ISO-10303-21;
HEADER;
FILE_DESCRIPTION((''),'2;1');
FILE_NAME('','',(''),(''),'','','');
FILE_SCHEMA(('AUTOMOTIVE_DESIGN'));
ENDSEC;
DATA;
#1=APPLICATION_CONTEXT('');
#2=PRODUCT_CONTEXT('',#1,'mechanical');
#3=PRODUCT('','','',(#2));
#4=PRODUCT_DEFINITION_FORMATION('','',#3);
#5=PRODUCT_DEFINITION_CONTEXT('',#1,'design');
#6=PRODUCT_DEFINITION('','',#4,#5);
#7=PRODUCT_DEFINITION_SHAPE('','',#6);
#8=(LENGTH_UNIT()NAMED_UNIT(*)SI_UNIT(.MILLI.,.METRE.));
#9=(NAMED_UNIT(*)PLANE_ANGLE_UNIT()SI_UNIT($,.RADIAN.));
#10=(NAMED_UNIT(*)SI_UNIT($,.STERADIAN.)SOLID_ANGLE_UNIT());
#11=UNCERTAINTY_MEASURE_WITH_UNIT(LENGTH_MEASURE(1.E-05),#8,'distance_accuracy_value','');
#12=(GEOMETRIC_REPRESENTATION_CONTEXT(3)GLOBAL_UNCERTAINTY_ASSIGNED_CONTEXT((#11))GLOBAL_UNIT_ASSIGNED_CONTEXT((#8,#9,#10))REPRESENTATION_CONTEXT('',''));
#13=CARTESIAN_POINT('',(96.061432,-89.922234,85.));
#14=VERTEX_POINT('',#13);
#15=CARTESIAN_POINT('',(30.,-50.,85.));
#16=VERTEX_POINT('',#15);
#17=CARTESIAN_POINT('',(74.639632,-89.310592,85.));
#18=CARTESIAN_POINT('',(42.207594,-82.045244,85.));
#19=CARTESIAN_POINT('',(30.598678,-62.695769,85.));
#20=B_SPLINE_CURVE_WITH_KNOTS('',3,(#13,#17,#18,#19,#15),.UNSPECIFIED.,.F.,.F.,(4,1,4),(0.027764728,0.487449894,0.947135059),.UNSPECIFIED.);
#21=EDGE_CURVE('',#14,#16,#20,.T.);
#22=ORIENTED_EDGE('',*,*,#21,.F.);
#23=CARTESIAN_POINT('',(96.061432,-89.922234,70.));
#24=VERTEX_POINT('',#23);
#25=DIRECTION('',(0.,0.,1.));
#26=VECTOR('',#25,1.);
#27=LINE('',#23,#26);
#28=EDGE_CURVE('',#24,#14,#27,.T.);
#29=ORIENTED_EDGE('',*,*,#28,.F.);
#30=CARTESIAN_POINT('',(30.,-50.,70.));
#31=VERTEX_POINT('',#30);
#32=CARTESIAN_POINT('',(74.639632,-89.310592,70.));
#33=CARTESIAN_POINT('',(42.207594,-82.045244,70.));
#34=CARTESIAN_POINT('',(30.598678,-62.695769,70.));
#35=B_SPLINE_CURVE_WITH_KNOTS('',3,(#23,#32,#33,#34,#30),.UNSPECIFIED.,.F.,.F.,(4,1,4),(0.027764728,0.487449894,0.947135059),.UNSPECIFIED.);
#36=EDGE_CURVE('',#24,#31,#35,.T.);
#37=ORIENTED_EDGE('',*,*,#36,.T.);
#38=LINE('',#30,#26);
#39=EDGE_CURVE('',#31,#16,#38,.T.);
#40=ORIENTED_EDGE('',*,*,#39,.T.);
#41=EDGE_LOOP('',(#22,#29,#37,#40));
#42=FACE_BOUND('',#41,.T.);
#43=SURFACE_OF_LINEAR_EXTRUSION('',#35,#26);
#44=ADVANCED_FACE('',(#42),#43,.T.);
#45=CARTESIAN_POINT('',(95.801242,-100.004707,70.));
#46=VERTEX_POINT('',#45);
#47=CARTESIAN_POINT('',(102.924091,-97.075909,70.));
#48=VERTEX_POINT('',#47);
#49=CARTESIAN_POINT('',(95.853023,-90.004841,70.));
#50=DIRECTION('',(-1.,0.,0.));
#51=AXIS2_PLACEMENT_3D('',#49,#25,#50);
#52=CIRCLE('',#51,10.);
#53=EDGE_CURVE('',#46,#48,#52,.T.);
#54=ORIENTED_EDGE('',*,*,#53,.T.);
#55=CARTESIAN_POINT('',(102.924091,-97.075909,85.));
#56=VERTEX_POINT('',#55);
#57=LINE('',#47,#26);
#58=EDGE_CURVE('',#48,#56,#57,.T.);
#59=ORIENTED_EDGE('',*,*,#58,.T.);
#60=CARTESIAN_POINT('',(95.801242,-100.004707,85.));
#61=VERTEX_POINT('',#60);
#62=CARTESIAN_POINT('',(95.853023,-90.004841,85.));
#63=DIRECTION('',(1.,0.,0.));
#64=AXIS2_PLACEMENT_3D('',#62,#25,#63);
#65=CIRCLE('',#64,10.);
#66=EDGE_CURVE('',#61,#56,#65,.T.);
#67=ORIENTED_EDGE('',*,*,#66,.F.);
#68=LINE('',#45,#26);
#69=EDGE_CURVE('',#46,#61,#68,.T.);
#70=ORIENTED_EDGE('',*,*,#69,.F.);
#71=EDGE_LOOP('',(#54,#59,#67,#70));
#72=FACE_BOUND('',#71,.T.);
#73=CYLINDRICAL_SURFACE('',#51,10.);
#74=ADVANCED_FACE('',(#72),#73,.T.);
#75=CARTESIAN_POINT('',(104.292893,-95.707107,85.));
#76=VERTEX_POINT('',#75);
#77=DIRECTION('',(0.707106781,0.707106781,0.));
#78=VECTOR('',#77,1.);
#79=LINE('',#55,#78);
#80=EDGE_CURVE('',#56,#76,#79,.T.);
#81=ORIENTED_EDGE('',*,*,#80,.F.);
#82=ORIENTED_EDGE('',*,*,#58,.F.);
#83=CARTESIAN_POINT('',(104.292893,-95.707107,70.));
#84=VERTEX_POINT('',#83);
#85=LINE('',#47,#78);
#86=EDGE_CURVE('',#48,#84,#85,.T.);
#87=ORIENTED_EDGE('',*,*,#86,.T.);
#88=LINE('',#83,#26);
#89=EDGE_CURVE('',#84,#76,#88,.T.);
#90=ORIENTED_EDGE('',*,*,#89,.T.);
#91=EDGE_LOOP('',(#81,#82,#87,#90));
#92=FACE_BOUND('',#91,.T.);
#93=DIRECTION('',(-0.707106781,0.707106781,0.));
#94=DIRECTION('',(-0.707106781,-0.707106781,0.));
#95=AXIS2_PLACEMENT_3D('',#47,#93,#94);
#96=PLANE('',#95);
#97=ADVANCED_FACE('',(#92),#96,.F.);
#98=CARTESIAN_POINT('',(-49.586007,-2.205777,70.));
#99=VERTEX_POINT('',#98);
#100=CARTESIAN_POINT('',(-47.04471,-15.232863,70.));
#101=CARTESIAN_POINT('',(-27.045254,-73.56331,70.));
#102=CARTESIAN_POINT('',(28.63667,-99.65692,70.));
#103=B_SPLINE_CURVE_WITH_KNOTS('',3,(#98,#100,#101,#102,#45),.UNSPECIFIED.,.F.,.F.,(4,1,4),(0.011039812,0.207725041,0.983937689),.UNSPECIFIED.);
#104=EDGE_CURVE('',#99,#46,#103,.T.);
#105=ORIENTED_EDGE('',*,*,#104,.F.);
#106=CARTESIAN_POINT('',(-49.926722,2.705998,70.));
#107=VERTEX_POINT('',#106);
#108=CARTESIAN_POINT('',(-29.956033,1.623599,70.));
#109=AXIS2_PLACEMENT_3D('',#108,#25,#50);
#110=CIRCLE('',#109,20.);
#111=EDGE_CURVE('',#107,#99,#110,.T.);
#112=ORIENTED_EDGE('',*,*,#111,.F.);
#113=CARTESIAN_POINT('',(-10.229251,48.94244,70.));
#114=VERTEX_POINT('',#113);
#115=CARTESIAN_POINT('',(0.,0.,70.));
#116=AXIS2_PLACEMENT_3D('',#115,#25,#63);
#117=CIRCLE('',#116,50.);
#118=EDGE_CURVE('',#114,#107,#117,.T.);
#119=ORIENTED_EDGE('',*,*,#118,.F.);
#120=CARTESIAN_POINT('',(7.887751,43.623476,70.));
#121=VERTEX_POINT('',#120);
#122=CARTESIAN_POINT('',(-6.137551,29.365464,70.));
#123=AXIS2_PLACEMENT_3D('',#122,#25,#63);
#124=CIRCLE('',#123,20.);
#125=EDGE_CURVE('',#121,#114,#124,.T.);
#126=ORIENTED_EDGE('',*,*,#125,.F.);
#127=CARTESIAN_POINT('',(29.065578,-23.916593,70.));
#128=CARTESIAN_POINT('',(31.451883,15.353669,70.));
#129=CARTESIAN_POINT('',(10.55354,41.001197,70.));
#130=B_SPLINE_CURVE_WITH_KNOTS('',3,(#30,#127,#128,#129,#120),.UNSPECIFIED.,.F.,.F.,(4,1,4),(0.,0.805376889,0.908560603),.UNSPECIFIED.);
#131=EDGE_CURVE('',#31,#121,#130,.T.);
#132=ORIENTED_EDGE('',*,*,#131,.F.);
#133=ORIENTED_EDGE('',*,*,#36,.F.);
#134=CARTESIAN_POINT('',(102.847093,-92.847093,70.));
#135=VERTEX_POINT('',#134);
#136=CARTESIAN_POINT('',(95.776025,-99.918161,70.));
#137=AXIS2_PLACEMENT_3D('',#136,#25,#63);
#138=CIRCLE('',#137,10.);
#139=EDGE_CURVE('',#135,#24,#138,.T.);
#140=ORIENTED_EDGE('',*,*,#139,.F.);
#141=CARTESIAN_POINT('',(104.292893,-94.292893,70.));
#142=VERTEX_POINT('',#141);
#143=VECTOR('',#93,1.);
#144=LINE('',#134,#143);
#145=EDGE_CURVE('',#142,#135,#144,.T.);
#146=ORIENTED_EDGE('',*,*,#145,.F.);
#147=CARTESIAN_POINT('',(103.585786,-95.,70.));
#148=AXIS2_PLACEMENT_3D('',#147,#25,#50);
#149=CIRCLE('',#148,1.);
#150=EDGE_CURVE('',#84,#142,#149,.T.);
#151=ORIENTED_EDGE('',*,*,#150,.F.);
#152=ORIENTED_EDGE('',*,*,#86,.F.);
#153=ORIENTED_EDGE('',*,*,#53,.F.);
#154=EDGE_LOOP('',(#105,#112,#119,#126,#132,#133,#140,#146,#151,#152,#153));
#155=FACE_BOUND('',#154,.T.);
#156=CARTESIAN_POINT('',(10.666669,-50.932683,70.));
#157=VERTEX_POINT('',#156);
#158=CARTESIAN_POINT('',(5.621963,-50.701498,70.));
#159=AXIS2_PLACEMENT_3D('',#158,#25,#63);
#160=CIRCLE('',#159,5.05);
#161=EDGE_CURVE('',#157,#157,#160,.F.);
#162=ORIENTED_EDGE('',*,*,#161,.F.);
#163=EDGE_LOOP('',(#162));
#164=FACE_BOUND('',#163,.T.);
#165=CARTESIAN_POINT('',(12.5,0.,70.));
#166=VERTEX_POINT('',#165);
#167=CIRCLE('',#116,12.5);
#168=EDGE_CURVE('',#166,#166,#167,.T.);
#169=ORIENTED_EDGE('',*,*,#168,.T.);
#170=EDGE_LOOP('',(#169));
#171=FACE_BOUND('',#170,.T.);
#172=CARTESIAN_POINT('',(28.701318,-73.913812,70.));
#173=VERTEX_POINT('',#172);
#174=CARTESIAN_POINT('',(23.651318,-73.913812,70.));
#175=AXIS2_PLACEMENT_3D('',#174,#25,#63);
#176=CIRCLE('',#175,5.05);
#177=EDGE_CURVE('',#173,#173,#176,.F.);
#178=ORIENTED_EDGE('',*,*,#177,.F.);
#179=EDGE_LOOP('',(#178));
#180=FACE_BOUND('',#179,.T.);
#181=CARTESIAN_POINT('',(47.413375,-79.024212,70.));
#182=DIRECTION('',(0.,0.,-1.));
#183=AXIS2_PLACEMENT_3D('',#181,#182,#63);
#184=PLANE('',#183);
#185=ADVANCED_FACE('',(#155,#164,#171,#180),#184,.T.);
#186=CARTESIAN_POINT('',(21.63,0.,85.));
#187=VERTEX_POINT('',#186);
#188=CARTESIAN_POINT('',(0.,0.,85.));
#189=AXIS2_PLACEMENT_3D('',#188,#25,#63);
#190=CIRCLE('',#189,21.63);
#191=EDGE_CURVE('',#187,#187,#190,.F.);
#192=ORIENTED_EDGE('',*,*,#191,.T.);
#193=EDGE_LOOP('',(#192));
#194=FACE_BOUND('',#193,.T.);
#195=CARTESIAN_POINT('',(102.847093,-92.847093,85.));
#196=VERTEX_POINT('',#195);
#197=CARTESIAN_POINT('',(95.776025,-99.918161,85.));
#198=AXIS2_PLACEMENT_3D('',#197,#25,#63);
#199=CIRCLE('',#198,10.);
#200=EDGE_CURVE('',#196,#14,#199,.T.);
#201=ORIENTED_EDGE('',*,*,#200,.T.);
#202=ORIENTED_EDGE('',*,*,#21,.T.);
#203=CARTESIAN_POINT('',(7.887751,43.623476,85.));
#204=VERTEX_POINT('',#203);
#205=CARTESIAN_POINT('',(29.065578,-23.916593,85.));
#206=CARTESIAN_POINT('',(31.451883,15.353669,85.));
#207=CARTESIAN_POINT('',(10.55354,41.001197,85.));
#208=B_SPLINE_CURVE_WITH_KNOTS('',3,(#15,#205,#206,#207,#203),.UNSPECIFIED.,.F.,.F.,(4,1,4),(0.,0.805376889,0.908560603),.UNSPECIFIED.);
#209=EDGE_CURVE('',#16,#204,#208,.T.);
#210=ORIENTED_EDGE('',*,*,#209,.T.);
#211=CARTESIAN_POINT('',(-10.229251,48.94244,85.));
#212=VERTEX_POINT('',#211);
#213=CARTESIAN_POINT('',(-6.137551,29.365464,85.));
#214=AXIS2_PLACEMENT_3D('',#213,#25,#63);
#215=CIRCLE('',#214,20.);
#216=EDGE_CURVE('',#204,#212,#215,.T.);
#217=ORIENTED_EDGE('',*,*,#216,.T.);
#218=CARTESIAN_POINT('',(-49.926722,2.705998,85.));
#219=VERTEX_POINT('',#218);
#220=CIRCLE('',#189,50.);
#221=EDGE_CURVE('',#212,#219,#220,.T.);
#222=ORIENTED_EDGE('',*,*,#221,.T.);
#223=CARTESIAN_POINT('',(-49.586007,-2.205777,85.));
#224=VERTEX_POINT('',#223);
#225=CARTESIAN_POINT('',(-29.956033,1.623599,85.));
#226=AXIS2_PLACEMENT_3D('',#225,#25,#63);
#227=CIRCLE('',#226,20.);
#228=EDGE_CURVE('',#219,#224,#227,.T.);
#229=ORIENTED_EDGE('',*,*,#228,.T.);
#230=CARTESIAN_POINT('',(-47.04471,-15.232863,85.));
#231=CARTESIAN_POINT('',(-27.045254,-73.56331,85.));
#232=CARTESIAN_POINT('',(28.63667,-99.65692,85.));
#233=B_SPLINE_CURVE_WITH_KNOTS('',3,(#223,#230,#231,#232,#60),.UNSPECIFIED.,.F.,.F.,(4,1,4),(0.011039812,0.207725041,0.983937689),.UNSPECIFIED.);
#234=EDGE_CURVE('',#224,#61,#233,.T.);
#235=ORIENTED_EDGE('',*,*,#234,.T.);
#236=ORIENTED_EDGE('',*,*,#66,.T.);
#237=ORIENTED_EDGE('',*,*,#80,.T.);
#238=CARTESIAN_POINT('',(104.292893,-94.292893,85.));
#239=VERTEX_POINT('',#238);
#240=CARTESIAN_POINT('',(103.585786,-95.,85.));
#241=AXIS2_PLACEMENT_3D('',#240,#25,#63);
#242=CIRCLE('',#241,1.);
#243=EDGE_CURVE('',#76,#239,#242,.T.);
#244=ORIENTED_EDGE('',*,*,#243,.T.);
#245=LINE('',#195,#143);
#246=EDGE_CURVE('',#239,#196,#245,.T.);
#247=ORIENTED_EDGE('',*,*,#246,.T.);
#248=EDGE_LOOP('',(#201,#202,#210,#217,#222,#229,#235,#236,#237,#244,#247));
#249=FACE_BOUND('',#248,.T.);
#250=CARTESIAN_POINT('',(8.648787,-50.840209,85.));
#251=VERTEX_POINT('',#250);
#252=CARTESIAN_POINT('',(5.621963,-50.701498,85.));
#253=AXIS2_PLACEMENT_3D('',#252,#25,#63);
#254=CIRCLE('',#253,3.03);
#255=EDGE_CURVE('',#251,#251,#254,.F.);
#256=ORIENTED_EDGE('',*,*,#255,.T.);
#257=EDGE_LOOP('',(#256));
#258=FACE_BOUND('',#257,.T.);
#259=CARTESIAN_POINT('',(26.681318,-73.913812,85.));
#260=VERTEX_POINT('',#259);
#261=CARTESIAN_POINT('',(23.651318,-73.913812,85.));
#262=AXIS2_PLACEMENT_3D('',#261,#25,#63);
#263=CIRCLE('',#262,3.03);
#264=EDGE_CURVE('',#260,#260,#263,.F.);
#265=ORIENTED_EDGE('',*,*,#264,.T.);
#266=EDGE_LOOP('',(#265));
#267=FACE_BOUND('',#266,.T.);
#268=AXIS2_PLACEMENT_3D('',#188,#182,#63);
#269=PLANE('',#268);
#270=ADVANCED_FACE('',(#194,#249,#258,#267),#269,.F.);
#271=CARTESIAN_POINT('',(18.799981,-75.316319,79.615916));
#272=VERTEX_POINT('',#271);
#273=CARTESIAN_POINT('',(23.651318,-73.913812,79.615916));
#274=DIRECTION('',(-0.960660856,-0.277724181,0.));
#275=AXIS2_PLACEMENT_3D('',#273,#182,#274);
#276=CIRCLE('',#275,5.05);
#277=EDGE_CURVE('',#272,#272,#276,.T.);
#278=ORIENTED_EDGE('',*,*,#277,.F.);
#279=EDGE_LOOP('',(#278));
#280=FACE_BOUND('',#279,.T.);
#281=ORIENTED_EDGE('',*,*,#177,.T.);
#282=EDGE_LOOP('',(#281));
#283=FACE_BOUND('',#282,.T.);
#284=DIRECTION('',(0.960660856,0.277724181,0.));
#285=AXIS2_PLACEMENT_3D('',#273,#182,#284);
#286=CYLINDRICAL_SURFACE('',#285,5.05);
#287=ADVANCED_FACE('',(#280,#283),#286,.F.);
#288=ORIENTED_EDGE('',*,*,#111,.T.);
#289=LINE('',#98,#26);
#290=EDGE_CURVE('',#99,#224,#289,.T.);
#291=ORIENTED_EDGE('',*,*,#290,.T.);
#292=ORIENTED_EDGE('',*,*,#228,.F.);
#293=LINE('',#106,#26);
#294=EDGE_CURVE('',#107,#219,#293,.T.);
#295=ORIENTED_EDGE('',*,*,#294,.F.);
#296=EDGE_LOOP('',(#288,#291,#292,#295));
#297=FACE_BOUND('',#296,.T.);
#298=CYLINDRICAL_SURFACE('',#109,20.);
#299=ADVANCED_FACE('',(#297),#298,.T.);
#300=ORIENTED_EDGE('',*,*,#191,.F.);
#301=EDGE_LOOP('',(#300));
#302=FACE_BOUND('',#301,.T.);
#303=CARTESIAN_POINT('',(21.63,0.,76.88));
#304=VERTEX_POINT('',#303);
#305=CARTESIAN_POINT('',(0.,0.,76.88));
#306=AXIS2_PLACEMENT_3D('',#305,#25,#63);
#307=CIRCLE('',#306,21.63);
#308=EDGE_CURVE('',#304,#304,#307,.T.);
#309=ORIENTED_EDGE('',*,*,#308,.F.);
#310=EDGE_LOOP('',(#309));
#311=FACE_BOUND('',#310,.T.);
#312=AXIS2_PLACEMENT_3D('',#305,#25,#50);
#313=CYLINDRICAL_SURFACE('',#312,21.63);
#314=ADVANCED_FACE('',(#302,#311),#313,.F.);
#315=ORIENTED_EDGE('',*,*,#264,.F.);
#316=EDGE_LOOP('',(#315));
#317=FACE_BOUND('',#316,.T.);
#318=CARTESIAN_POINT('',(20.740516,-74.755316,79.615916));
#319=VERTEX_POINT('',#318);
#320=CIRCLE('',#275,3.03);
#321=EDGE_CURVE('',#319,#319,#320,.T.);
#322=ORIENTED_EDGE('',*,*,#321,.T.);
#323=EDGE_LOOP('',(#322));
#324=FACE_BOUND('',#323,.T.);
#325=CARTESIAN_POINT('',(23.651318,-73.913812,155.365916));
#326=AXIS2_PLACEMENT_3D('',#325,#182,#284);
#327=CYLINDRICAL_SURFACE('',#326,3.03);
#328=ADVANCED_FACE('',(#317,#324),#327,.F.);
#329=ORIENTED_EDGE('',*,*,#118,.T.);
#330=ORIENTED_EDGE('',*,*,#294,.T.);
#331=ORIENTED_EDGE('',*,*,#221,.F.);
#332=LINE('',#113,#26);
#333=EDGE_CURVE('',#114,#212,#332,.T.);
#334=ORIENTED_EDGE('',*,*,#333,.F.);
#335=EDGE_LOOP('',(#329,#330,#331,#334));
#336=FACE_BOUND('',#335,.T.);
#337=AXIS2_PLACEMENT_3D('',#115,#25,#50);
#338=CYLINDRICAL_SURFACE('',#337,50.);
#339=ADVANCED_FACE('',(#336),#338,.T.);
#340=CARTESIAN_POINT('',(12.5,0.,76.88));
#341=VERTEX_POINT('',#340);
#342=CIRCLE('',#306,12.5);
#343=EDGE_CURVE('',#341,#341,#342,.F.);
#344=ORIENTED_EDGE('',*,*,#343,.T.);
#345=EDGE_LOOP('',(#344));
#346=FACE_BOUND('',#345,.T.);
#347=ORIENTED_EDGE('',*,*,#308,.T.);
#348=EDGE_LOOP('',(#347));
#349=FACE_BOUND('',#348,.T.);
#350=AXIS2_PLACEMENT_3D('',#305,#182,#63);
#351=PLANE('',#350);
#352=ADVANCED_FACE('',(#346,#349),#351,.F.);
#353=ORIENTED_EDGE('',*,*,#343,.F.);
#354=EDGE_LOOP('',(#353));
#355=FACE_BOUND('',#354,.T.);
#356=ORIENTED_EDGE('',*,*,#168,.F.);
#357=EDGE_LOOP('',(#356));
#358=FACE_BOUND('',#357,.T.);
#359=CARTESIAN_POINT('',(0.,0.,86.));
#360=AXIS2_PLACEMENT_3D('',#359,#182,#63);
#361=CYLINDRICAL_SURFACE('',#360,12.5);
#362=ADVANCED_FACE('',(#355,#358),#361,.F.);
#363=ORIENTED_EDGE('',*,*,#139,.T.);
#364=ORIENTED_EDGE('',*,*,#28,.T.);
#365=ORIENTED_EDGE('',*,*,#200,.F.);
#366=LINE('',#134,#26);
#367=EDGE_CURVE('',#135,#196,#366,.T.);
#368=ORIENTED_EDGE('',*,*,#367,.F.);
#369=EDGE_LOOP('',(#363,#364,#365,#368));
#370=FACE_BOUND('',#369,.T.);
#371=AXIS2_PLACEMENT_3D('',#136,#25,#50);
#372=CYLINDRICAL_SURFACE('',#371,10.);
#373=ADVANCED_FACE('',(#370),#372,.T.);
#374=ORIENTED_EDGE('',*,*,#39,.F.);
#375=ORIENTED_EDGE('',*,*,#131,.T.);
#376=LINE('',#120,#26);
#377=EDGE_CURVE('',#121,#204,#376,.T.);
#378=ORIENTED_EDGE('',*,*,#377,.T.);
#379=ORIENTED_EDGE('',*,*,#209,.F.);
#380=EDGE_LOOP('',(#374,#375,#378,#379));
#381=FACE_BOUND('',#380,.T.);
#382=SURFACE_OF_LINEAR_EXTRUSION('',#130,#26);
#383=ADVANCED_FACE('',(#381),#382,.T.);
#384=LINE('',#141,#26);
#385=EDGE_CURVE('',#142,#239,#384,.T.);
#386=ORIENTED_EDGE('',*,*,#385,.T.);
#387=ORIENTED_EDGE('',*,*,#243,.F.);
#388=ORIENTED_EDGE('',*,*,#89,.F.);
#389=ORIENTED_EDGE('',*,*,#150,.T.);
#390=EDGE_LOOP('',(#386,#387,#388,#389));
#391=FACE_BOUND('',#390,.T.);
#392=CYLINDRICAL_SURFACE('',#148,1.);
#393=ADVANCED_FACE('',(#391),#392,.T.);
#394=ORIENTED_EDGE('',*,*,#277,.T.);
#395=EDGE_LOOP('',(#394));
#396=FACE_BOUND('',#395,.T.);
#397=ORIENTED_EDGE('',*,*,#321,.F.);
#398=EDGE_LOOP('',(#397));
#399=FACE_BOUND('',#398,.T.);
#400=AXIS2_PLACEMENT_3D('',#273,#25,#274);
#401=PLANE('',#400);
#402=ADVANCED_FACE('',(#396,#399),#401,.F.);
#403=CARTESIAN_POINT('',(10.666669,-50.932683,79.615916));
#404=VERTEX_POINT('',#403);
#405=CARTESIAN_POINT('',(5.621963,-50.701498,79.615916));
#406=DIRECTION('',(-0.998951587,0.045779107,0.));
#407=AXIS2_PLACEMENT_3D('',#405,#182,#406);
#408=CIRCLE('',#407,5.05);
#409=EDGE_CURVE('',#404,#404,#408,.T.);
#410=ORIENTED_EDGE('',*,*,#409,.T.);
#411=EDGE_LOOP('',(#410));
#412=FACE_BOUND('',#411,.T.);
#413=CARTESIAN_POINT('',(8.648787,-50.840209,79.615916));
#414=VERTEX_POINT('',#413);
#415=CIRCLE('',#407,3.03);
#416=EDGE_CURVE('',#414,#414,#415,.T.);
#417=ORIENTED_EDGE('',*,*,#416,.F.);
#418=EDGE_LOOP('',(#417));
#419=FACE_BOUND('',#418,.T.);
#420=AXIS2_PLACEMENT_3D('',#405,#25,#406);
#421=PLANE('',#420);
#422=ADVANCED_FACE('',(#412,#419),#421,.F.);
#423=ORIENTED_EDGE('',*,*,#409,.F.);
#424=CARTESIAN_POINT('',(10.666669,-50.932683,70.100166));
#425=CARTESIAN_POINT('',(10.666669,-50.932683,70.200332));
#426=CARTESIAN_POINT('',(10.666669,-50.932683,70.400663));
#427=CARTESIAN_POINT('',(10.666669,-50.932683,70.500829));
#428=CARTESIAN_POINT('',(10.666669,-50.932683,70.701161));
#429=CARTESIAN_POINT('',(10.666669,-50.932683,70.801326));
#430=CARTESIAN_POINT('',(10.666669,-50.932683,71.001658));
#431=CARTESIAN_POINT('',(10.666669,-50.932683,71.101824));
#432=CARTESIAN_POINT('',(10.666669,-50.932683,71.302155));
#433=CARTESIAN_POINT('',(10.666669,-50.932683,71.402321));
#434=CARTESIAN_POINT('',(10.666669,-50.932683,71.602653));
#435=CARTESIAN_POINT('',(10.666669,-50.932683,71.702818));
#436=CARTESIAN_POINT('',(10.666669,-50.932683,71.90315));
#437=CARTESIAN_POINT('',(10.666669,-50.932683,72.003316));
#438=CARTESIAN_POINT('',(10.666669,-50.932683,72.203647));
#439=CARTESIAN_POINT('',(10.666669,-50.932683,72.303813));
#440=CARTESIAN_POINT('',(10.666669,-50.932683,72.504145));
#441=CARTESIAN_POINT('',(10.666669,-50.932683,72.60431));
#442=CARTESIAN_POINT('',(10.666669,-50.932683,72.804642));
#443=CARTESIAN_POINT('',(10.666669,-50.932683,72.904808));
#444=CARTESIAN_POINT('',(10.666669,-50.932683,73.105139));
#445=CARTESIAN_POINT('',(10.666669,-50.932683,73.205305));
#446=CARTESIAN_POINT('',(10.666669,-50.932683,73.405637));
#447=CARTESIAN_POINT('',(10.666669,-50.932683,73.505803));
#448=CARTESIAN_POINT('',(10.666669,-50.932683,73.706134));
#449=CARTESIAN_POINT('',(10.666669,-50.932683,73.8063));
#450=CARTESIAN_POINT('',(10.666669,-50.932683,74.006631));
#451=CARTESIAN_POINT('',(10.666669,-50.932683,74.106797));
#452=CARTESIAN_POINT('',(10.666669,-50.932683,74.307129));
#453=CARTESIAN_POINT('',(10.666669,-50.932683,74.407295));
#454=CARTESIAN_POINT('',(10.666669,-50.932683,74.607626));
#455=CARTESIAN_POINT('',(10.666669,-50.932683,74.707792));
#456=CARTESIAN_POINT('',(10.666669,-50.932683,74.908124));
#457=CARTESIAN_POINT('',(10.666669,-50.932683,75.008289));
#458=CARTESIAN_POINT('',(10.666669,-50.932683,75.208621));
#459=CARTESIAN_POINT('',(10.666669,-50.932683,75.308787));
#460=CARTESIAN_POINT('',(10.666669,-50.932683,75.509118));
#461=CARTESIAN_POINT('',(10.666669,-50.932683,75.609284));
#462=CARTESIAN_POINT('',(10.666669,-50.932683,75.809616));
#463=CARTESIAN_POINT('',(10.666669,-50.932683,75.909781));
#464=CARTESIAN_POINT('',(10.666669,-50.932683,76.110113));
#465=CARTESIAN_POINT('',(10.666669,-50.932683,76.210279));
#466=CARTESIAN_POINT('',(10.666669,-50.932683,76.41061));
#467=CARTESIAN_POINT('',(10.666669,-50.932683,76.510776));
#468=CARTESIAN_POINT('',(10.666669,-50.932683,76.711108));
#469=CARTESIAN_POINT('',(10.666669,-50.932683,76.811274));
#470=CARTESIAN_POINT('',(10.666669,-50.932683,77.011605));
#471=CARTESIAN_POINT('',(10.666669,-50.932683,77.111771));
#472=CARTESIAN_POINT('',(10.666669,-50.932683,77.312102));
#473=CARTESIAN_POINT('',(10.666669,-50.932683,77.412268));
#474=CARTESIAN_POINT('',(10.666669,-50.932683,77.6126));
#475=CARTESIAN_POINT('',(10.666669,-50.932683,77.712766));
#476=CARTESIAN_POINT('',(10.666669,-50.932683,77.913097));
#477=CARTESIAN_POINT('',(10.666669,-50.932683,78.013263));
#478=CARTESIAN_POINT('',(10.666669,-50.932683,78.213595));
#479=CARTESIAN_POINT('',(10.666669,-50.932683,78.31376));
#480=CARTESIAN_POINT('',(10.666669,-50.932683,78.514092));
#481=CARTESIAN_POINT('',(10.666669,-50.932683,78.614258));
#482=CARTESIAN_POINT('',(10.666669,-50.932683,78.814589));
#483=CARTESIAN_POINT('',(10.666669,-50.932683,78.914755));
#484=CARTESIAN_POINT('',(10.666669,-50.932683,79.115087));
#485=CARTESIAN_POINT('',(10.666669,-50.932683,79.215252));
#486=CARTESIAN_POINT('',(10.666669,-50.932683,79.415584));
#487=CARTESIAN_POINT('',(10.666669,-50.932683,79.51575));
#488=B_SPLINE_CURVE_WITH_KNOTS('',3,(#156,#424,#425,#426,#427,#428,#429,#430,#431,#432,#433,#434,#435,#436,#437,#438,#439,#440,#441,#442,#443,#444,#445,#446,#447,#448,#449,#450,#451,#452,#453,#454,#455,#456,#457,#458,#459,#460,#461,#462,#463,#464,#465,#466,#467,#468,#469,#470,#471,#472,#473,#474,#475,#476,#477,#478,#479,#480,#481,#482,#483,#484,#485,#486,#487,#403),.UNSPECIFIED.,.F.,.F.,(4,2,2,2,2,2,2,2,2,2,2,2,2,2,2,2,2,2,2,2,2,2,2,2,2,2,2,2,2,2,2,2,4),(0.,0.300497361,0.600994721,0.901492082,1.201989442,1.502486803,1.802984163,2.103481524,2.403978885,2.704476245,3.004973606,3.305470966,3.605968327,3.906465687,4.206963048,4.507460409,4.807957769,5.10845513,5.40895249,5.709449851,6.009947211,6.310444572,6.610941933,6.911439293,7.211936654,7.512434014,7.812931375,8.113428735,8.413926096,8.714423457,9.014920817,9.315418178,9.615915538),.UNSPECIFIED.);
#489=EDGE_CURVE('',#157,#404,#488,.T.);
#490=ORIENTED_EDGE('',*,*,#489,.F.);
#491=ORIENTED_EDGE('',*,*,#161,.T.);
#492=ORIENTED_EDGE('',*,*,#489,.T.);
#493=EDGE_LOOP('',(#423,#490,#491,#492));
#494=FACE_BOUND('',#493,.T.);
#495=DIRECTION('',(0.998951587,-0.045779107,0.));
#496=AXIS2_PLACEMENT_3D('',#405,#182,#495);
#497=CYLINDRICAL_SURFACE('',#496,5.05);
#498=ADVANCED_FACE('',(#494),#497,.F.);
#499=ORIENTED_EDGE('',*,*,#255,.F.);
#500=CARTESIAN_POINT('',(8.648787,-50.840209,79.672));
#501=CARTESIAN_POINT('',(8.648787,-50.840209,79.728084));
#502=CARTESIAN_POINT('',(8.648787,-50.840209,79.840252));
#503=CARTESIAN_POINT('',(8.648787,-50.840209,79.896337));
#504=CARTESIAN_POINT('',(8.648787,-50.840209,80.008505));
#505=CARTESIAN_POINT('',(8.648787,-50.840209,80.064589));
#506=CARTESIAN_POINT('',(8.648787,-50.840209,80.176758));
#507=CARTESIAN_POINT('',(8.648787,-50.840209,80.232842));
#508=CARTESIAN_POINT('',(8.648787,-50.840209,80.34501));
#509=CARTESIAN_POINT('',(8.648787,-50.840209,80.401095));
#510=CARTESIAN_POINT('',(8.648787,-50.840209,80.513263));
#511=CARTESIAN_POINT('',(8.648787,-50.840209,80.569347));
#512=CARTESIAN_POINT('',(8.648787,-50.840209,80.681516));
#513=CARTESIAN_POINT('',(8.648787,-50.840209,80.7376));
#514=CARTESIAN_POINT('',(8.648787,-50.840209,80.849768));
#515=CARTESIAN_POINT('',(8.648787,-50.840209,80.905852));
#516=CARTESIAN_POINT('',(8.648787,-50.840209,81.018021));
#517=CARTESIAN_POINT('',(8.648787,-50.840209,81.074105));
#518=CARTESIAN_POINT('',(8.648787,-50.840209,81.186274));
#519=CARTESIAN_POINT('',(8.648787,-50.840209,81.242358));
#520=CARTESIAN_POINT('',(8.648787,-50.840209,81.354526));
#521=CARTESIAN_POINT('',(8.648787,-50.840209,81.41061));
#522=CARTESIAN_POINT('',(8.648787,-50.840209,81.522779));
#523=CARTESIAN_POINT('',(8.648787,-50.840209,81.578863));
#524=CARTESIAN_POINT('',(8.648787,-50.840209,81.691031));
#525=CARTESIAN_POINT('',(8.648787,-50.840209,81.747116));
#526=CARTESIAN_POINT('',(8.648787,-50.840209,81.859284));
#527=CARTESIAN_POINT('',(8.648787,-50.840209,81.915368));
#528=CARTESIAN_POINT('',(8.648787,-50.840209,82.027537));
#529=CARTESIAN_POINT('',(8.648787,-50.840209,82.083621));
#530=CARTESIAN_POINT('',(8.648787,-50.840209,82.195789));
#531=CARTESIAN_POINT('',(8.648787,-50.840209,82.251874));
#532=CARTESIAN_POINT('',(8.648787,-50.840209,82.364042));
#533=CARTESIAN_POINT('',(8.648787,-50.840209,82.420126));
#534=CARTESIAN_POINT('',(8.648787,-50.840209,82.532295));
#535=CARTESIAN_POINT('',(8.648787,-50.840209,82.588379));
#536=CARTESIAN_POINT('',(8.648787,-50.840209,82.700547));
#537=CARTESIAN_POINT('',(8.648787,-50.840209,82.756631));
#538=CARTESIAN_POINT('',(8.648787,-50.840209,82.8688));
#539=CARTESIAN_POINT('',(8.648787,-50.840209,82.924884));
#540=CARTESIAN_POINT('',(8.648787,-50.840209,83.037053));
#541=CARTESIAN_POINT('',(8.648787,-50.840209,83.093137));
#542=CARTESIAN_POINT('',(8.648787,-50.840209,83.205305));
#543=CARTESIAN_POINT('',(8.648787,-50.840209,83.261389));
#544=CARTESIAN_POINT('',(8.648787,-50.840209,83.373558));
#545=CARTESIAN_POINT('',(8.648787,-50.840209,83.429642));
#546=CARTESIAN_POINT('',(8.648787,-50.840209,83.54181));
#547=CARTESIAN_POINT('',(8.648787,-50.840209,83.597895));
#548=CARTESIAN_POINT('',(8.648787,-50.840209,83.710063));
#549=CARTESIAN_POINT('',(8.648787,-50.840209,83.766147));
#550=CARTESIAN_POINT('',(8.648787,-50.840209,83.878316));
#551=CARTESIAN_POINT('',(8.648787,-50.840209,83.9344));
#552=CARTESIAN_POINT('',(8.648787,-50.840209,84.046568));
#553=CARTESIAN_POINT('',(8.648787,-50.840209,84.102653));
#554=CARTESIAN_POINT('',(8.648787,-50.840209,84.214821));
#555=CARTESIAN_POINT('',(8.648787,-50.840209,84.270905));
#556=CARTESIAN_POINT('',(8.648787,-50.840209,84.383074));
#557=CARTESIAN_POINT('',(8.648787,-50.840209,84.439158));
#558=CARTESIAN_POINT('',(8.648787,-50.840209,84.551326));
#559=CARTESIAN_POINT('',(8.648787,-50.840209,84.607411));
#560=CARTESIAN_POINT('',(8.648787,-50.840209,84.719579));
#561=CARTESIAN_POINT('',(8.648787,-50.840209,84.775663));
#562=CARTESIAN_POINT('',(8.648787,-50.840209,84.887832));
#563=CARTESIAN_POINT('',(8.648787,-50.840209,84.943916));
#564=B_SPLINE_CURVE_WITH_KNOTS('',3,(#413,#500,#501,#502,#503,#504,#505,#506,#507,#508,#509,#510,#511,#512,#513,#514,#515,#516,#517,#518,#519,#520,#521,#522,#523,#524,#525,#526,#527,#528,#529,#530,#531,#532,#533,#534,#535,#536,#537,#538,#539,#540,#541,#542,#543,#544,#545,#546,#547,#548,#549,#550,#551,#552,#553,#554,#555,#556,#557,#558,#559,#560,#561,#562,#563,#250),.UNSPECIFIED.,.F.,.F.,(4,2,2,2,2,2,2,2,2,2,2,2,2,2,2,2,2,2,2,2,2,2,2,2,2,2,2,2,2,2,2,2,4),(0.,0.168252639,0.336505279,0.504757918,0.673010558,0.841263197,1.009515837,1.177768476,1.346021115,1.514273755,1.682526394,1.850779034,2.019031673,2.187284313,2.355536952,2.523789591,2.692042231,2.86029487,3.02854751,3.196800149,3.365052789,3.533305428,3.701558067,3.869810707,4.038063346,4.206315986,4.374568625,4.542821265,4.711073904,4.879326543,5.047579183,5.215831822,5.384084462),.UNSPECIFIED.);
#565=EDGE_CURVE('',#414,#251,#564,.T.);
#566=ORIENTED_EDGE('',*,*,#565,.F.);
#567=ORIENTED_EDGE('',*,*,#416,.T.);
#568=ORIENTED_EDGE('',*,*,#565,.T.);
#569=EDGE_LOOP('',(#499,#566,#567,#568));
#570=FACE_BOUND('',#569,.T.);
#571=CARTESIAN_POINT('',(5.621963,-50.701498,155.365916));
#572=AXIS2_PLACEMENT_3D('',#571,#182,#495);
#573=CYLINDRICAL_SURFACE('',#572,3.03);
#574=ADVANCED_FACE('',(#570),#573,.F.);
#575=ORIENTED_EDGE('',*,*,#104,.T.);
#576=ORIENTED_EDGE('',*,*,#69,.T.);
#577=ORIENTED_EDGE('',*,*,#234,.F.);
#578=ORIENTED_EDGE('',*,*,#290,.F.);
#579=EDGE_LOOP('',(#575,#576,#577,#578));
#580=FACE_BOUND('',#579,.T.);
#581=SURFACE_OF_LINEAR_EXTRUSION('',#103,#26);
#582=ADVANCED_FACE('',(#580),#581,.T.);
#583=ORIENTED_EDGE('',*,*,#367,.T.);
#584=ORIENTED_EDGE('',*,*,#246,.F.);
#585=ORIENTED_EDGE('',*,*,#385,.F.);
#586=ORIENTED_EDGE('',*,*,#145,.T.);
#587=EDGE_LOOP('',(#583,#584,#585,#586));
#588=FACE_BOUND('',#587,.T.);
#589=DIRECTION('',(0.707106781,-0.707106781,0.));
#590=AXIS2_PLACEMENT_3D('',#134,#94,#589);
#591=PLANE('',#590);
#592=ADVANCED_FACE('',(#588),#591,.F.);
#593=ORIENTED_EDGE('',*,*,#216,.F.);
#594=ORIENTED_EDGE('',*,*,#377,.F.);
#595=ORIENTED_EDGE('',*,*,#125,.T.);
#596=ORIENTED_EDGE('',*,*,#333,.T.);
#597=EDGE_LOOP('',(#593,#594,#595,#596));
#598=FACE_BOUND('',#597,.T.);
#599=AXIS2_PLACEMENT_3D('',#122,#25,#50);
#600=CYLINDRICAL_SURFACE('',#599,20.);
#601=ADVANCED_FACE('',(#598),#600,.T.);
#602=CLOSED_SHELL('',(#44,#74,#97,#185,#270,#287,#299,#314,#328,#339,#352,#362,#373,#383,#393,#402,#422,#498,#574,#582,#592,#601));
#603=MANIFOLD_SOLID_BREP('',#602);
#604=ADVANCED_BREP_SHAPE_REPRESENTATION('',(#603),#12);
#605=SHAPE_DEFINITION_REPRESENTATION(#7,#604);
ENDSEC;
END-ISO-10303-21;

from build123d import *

# Parameters (mm, degrees)
CROQUIS1_R              = 10
SALIENTE_EXTRUIR1_DEPTH = 100
CORTAR_EXTRUIR4_DEPTH   = 15
CROQUIS3_W              = 244.799963401
CROQUIS3_H              = 159.784694376
CORTAR_EXTRUIR5_DEPTH   = 35
CROQUIS4_W              = 177.681228393
CROQUIS4_H              = 202.290816813
CORTAR_EXTRUIR6_DEPTH   = 50
CAVIDAD1_START          = 90.384084462
CAVIDAD1_OUTLINE_R      = 5.05
CAVIDAD1_DEPTH          = 9.615915538
CAVIDAD1_START_2        = 85
CAVIDAD1_2_OUTLINE_R    = 3.03
CAVIDAD1_2_DEPTH        = 5.384084462
CROQUIS5_R              = 21
CORTAR_EXTRUIR7_DEPTH   = 8
CROQUIS6_R              = 12.5
CORTAR_EXTRUIR8_DEPTH   = 8
SALIENTE_EXTRUIR2_START = 8
CROQUIS7_R              = 21
CROQUIS7_R_2            = 12.5
SALIENTE_EXTRUIR2_DEPTH = 8
CROQUIS8_R              = 21
CORTAR_EXTRUIR9_DEPTH   = 8
CAVIDAD2_START          = 85
CAVIDAD2_OUTLINE_R      = 21.63
CAVIDAD2_DEPTH          = 8.12


# Read off the part's stored shape, not the designer's step: Cavidad1, Cavidad2
with BuildPart() as part:
    # Croquis1 → Saliente-Extruir1 (new body)
    with BuildSketch(Plane.XY):
        with BuildLine():
            Line((102.84709295, -92.84709295), (104.292893219, -94.292893219))
            ThreePointArc((104.292893219, -94.292893219), (104.585786438, -95), (104.292893219, -95.707106781))
            Line((104.292893219, -95.707106781), (102.924090823, -97.075909177))
            ThreePointArc((102.924090823, -97.075909177), (99.655924863, -99.253513567), (95.801242309, -100.004707302))
            add(Edge.make_bspline(
                [(-49.58600728, -2.205776949), (-47.044709507, -15.23286343), (-27.045253615, -73.563310407), (28.636670051, -99.656919769), (95.801242309, -100.004707302)],
                knots=[0.011039812, 0.011039812, 0.011039812, 0.011039812, 0.207725041, 0.983937689, 0.983937689, 0.983937689, 0.983937689], degree=3))
            ThreePointArc((-49.58600728, -2.205776949), (-49.90808847, 0.239585929), (-49.92672205, 2.705998037))
            ThreePointArc((-49.92672205, 2.705998037), (-37.935964584, 32.570885635), (-10.229250857, 48.942439936))
            ThreePointArc((-10.229250857, 48.942439936), (-0.503550938, 48.555514737), (7.88775097, 43.623476385))
            add(Edge.make_bspline(
                [(30, -50), (29.065577858, -23.91659264), (31.451883129, 15.353668912), (10.5535399, 41.001196903), (7.88775097, 43.623476385)],
                knots=[0, 0, 0, 0, 0.805376889, 0.908560603, 0.908560603, 0.908560603, 0.908560603], degree=3))
            add(Edge.make_bspline(
                [(96.061432126, -89.922234449), (74.639632489, -89.310592156), (42.207594165, -82.045244121), (30.598677739, -62.69576919), (30, -50)],
                knots=[0.027764728, 0.027764728, 0.027764728, 0.027764728, 0.487449894, 0.947135059, 0.947135059, 0.947135059, 0.947135059], degree=3))
            ThreePointArc((96.061432126, -89.922234449), (99.734323975, -90.734922209), (102.84709295, -92.84709295))
        make_face()
        Circle(CROQUIS1_R, mode=Mode.SUBTRACT)
    extrude(amount=SALIENTE_EXTRUIR1_DEPTH)

    # Croquis2 → Cortar-Extruir4 (cut)
    with BuildSketch(Plane(origin=(0, 0, 0), x_dir=(-1, 0, 0), z_dir=(0, 0, -1))):
        with BuildLine():
            ThreePointArc((1.102623365, 39.984799883), (1.653330869, 39.965816607), (2.203724614, 39.939248839))
            ThreePointArc((2.203724614, 39.939248839), (3.208029629, 37.678468026), (3.853201686, 35.290265468))
            ThreePointArc((3.853201686, 35.290265468), (4.391380959, 35.227344113), (4.928537187, 35.156215968))
            ThreePointArc((4.928537187, 35.156215968), (6.140272041, 37.312939662), (7.668866774, 39.257973488))
            ThreePointArc((7.668866774, 39.257973488), (8.208938801, 39.148605643), (8.747452981, 39.031808392))
            ThreePointArc((8.747452981, 39.031808392), (9.365948293, 36.63655851), (9.609235823, 34.174736091))
            ThreePointArc((9.609235823, 34.174736091), (10.129718517, 34.024091505), (10.647841327, 33.865520446))
            ThreePointArc((10.647841327, 33.865520446), (12.198034749, 35.793384238), (14.025923488, 37.460291914))
            ThreePointArc((14.025923488, 37.460291914), (14.540628281, 37.263522769), (15.052573634, 37.05968196))
            ThreePointArc((15.052573634, 37.05968196), (15.268388303, 34.595299183), (15.103155055, 32.127009001))
            ThreePointArc((15.103155055, 32.127009001), (15.591743761, 31.892750375), (16.076700112, 31.651061807))
            ThreePointArc((16.076700112, 31.651061807), (17.923066867, 33.297478598), (20.000389573, 34.640791229))
            ThreePointArc((20.000389573, 34.640791229), (20.475687326, 34.361988134), (20.947099317, 34.076664012))
            ThreePointArc((20.947099317, 34.076664012), (20.754346482, 31.610370276), (20.18509959, 29.202940855))
            ThreePointArc((20.18509959, 29.202940855), (20.628466879, 28.891458153), (21.067028427, 28.57324471))
            ThreePointArc((21.067028427, 28.57324471), (23.159204443, 29.893304542), (25.429297167, 30.87638006))
            ThreePointArc((25.429297167, 30.87638006), (25.852222997, 30.523148037), (26.270242736, 30.164123501))
            ThreePointArc((26.270242736, 30.164123501), (25.674180192, 27.763192871), (24.716447225, 25.482292608))
            ThreePointArc((24.716447225, 25.482292608), (25.102499195, 25.102082267), (25.482703124, 24.716023982))
            ThreePointArc((25.482703124, 24.716023982), (27.763619294, 25.673719065), (30.164559823, 26.269741732))
            ThreePointArc((30.164559823, 26.269741732), (30.523577417, 25.85171603), (30.876802415, 25.428784332))
            ThreePointArc((30.876802415, 25.428784332), (29.893689193, 23.158707937), (28.573594612, 21.066553846))
            ThreePointArc((28.573594612, 21.066553846), (28.891800771, 20.627987013), (29.203276108, 20.18461455))
            ThreePointArc((29.203276108, 20.18461455), (31.610714984, 20.753821458), (34.077011921, 20.94653333))
            ThreePointArc((34.077011921, 20.94653333), (34.362328213, 20.4751166), (34.641123413, 19.999814215))
            ThreePointArc((34.641123413, 19.999814215), (33.297776281, 17.922513822), (31.651328823, 16.076174412))
            ThreePointArc((31.651328823, 16.076174412), (31.893009337, 15.591214047), (32.127259848, 15.102621451))
            ThreePointArc((32.127259848, 15.102621451), (34.595552773, 15.267813702), (37.059931966, 15.051958102))
            ThreePointArc((37.059931966, 15.051958102), (37.263764272, 14.540009363), (37.460524868, 14.025301302))
            ThreePointArc((37.460524868, 14.025301302), (35.793586832, 12.197440249), (33.865697293, 10.647278847))
            ThreePointArc((33.865697293, 10.647278847), (34.024259747, 10.129153404), (34.174895688, 9.608668207))
            ThreePointArc((34.174895688, 9.608668207), (36.636714066, 9.365339789), (39.031953674, 8.746804694))
            ThreePointArc((39.031953674, 8.746804694), (39.148741981, 8.208288574), (39.258100856, 7.668214731))
            ThreePointArc((39.258100856, 7.668214731), (37.313041641, 6.139652303), (35.156297822, 4.927953271))
            ThreePointArc((35.156297822, 4.927953271), (35.227417046, 4.390795861), (35.290329461, 3.852615543))
            ThreePointArc((35.290329461, 3.852615543), (37.678521304, 3.20740382), (39.939285436, 2.203061256))
            ThreePointArc((39.939285436, 2.203061256), (39.965844062, 1.65266707), (39.984818192, 1.101959251))
            ThreePointArc((39.984818192, 1.101959251), (37.814693942, -0.085609353), (35.487926192, -0.925794025))
            ThreePointArc((35.487926192, -0.925794025), (35.469662238, -1.467331147), (35.443135042, -2.00852643))
            ThreePointArc((35.443135042, -2.00852643), (37.692556701, -3.038021764), (39.757177604, -4.400775951))
            ThreePointArc((39.757177604, -4.400775951), (39.692782099, -4.948034883), (39.620853919, -5.494354805))
            ThreePointArc((39.620853919, -5.494354805), (37.284859968, -6.308535809), (34.851536446, -6.754288072))
            ThreePointArc((34.851536446, -6.754288072), (34.744387508, -7.285433186), (34.629144292, -7.814881038))
            ThreePointArc((34.629144292, -7.814881038), (36.678437409, -9.200578033), (38.490597607, -10.884571461))
            ThreePointArc((38.490597607, -10.884571461), (38.337004513, -11.413767343), (38.176136036, -11.940797184))
            ThreePointArc((38.176136036, -11.940797184), (35.737992209, -12.359381853), (33.264487636, -12.398542748))
            ThreePointArc((33.264487636, -12.398542748), (33.071376458, -12.904807599), (32.870560757, -13.408066063))
            ThreePointArc((32.870560757, -13.408066063), (34.663825958, -15.112166519), (36.174094444, -17.071464236))
            ThreePointArc((36.174094444, -17.071464236), (35.935493381, -17.568161984), (35.690072679, -18.061525743))
            ThreePointArc((35.690072679, -18.061525743), (33.216285184, -18.073096179), (30.770070318, -17.704597499))
            ThreePointArc((30.770070318, -17.704597499), (30.496264469, -18.172172502), (30.215354012, -18.635513998))
            ThreePointArc((30.215354012, -18.635513998), (31.703675696, -20.611534496), (32.870856284, -22.792691969))
            ThreePointArc((32.870856284, -22.792691969), (32.553755666, -23.243342962), (32.230477177, -23.689582963))
            ThreePointArc((32.230477177, -23.689582963), (29.788524487, -23.293823554), (27.436325694, -22.527716982))
            ThreePointArc((27.436325694, -22.527716982), (27.089293883, -22.94384791), (26.735951175, -23.35463369))
            ThreePointArc((26.735951175, -23.35463369), (27.878731807, -25.548673542), (28.670986852, -27.89219448))
            ThreePointArc((28.670986852, -27.89219448), (28.284036357, -28.284506136), (27.891718275, -28.671450114))
            ThreePointArc((27.891718275, -28.671450114), (25.548210496, -27.879156145), (23.354189625, -26.736339072))
            ThreePointArc((23.354189625, -26.736339072), (22.943397976, -27.089674957), (22.527261285, -27.436699856))
            ThreePointArc((22.527261285, -27.436699856), (23.293328789, -29.788911374), (23.689047639, -32.230870636))
            ThreePointArc((23.689047639, -32.230870636), (23.242802268, -32.554141714), (22.792146008, -32.871234847))
            ThreePointArc((22.792146008, -32.871234847), (20.611007921, -31.704018032), (18.635012143, -30.215663528))
            ThreePointArc((18.635012143, -30.215663528), (18.171665982, -30.496566289), (17.704086432, -30.770364373))
            ThreePointArc((17.704086432, -30.770364373), (18.072544482, -33.216585358), (18.060932958, -35.690372661))
            ThreePointArc((18.060932958, -35.690372661), (17.567565123, -35.935785168), (17.070863412, -36.174377982))
            ThreePointArc((17.070863412, -36.174377982), (15.111590779, -34.664076954), (13.407520108, -32.870783449))
            ThreePointArc((13.407520108, -32.870783449), (12.90425831, -33.071590791), (12.397990251, -33.264693561))
            ThreePointArc((12.397990251, -33.264693561), (12.358788274, -35.738197483), (11.940163108, -38.176334357))
            ThreePointArc((11.940163108, -38.176334357), (11.413130596, -38.337194081), (10.883932163, -38.490778385))
            ThreePointArc((10.883932163, -38.490778385), (9.199968834, -36.678590218), (7.814305875, -34.629274085))
            ThreePointArc((7.814305875, -34.629274085), (7.28485611, -34.744508508), (6.753709216, -34.851648624))
            ThreePointArc((6.753709216, -34.851648624), (6.307916538, -37.284964743), (5.493696735, -39.62094517))
            ThreePointArc((5.493696735, -39.62094517), (4.947375618, -39.692864277), (4.400115616, -39.757250692))
            ThreePointArc((4.400115616, -39.757250692), (3.037395721, -37.692607155), (2.007937749, -35.443168397))
            ThreePointArc((2.007937749, -35.443168397), (1.466742025, -35.469686605), (0.9252046, -35.487941564))
            ThreePointArc((0.9252046, -35.487941564), (0.084981283, -37.814695359), (-1.102623365, -39.984799883))
            ThreePointArc((-1.102623365, -39.984799883), (-1.653330869, -39.965816607), (-2.203724614, -39.939248839))
            ThreePointArc((-2.203724614, -39.939248839), (-3.208029629, -37.678468026), (-3.853201686, -35.290265468))
            ThreePointArc((-3.853201686, -35.290265468), (-4.391380959, -35.227344113), (-4.928537187, -35.156215968))
            ThreePointArc((-4.928537187, -35.156215968), (-6.140272041, -37.312939662), (-7.668866774, -39.257973488))
            ThreePointArc((-7.668866774, -39.257973488), (-8.208938801, -39.148605643), (-8.747452981, -39.031808392))
            ThreePointArc((-8.747452981, -39.031808392), (-9.365948293, -36.63655851), (-9.609235823, -34.174736091))
            ThreePointArc((-9.609235823, -34.174736091), (-10.129718517, -34.024091505), (-10.647841327, -33.865520446))
            ThreePointArc((-10.647841327, -33.865520446), (-12.198034749, -35.793384238), (-14.025923488, -37.460291914))
            ThreePointArc((-14.025923488, -37.460291914), (-14.540628281, -37.263522769), (-15.052573634, -37.05968196))
            ThreePointArc((-15.052573634, -37.05968196), (-15.268388303, -34.595299183), (-15.103155055, -32.127009001))
            ThreePointArc((-15.103155055, -32.127009001), (-15.591743761, -31.892750375), (-16.076700112, -31.651061807))
            ThreePointArc((-16.076700112, -31.651061807), (-17.923066867, -33.297478598), (-20.000389573, -34.640791229))
            ThreePointArc((-20.000389573, -34.640791229), (-20.475687326, -34.361988134), (-20.947099317, -34.076664012))
            ThreePointArc((-20.947099317, -34.076664012), (-20.754346482, -31.610370276), (-20.18509959, -29.202940855))
            ThreePointArc((-20.18509959, -29.202940855), (-20.628466879, -28.891458153), (-21.067028427, -28.57324471))
            ThreePointArc((-21.067028427, -28.57324471), (-23.159204443, -29.893304542), (-25.429297167, -30.87638006))
            ThreePointArc((-25.429297167, -30.87638006), (-25.852222997, -30.523148037), (-26.270242736, -30.164123501))
            ThreePointArc((-26.270242736, -30.164123501), (-25.674180192, -27.763192871), (-24.716447225, -25.482292608))
            ThreePointArc((-24.716447225, -25.482292608), (-25.102499195, -25.102082267), (-25.482703124, -24.716023982))
            ThreePointArc((-25.482703124, -24.716023982), (-27.421409872, -25.555856409), (-29.453588357, -26.133916065))
            add(Edge.make_bspline(
                [(-30, -50), (-29.734872846, -42.599255467), (-29.715262914, -34.495945215), (-29.453588357, -26.133916065)],
                knots=[0, 0, 0, 0, 0.228512653, 0.228512653, 0.228512653, 0.228512653], degree=3))
            add(Edge.make_bspline(
                [(-96.061432126, -89.922234449), (-74.639632489, -89.310592156), (-42.207594165, -82.045244121), (-30.598677739, -62.69576919), (-30, -50)],
                knots=[0.027764728, 0.027764728, 0.027764728, 0.027764728, 0.487449894, 0.947135059, 0.947135059, 0.947135059, 0.947135059], degree=3))
            ThreePointArc((-96.061432126, -89.922234449), (-99.734323975, -90.734922209), (-102.84709295, -92.84709295))
            Line((-102.84709295, -92.84709295), (-104.292893219, -94.292893219))
            ThreePointArc((-104.292893219, -94.292893219), (-104.585786438, -95), (-104.292893219, -95.707106781))
            Line((-104.292893219, -95.707106781), (-102.924090823, -97.075909177))
            ThreePointArc((-102.924090823, -97.075909177), (-99.655924863, -99.253513567), (-95.801242309, -100.004707302))
            add(Edge.make_bspline(
                [(49.58600728, -2.205776949), (47.044709507, -15.23286343), (27.045253615, -73.563310407), (-28.636670051, -99.656919769), (-95.801242309, -100.004707302)],
                knots=[0.011039812, 0.011039812, 0.011039812, 0.011039812, 0.207725041, 0.983937689, 0.983937689, 0.983937689, 0.983937689], degree=3))
            ThreePointArc((49.58600728, -2.205776949), (49.90808847, 0.239585929), (49.92672205, 2.705998037))
            ThreePointArc((49.92672205, 2.705998037), (37.935964584, 32.570885635), (10.229250857, 48.942439936))
            ThreePointArc((10.229250857, 48.942439936), (0.503550938, 48.555514737), (-7.88775097, 43.623476385))
            add(Edge.make_bspline(
                [(-15.182020199, 34.727214957), (-15.121605489, 34.818294405), (-12.99668952, 38.002837294), (-10.5535399, 41.001196903), (-7.88775097, 43.623476385)],
                knots=[0.802344073, 0.802344073, 0.802344073, 0.802344073, 0.805376889, 0.908560603, 0.908560603, 0.908560603, 0.908560603], degree=3))
            ThreePointArc((-15.182020199, 34.727214957), (-14.257602386, 33.834526615), (-13.407520108, 32.870783449))
            ThreePointArc((-13.407520108, 32.870783449), (-12.90425831, 33.071590791), (-12.397990251, 33.264693561))
            ThreePointArc((-12.397990251, 33.264693561), (-12.358788274, 35.738197483), (-11.940163108, 38.176334357))
            ThreePointArc((-11.940163108, 38.176334357), (-11.413130596, 38.337194081), (-10.883932163, 38.490778385))
            ThreePointArc((-10.883932163, 38.490778385), (-9.199968834, 36.678590218), (-7.814305875, 34.629274085))
            ThreePointArc((-7.814305875, 34.629274085), (-7.28485611, 34.744508508), (-6.753709216, 34.851648624))
            ThreePointArc((-6.753709216, 34.851648624), (-6.307916538, 37.284964743), (-5.493696735, 39.62094517))
            ThreePointArc((-5.493696735, 39.62094517), (-4.947375618, 39.692864277), (-4.400115616, 39.757250692))
            ThreePointArc((-4.400115616, 39.757250692), (-3.037395721, 37.692607155), (-2.007937749, 35.443168397))
            ThreePointArc((-2.007937749, 35.443168397), (-1.466742025, 35.469686605), (-0.9252046, 35.487941564))
            ThreePointArc((-0.9252046, 35.487941564), (-0.084981283, 37.814695359), (1.102623365, 39.984799883))
        make_face()
    extrude(amount=-CORTAR_EXTRUIR4_DEPTH, mode=Mode.SUBTRACT)

    # Croquis3 → Cortar-Extruir5 (cut)
    with BuildSketch(Plane(origin=(0, 0, 0), x_dir=(-1, 0, 0), z_dir=(0, 0, -1))):
        with Locations((-26.261343778, -29.231181028)):
            Rectangle(CROQUIS3_W, CROQUIS3_H)
    extrude(amount=-CORTAR_EXTRUIR5_DEPTH, mode=Mode.SUBTRACT)

    # Croquis4 → Cortar-Extruir6 (cut)
    with BuildSketch(Plane(origin=(0, 0, 35), x_dir=(-1, 0, 0), z_dir=(0, 0, -1))):
        with Locations((-31.414152083, -26.798932517)):
            Rectangle(CROQUIS4_W, CROQUIS4_H)
    extrude(amount=-CORTAR_EXTRUIR6_DEPTH, mode=Mode.SUBTRACT)

    # Cavidad1 outline → Cavidad1 (cut)
    with BuildSketch(Plane.XY.offset(CAVIDAD1_START)):
        with Locations((5.62196341, -50.701498074)):
            Circle(CAVIDAD1_OUTLINE_R)
        with Locations((23.651318082, -73.91381178)):
            Circle(CAVIDAD1_OUTLINE_R)
    extrude(amount=CAVIDAD1_DEPTH, mode=Mode.SUBTRACT)

    # Cavidad1 2 outline → Cavidad1 2 (cut)
    with BuildSketch(Plane.XY.offset(CAVIDAD1_START_2)):
        with Locations((5.62196341, -50.701498074)):
            Circle(CAVIDAD1_2_OUTLINE_R)
        with Locations((23.651318082, -73.91381178)):
            Circle(CAVIDAD1_2_OUTLINE_R)
    extrude(amount=CAVIDAD1_2_DEPTH, mode=Mode.SUBTRACT)

    # Croquis5 → Cortar-Extruir7 (cut)
    with BuildSketch(Plane.XY.offset(100)):
        Circle(CROQUIS5_R)
    extrude(amount=-CORTAR_EXTRUIR7_DEPTH, mode=Mode.SUBTRACT)

    # Croquis6 → Cortar-Extruir8 (cut)
    with BuildSketch(Plane.XY.offset(92)):
        Circle(CROQUIS6_R)
    extrude(amount=-CORTAR_EXTRUIR8_DEPTH, mode=Mode.SUBTRACT)

    # Croquis7 → Saliente-Extruir2 (add)
    with BuildSketch(Plane.XY.offset(92).offset(SALIENTE_EXTRUIR2_START)):
        Circle(CROQUIS7_R)
        Circle(CROQUIS7_R_2, mode=Mode.SUBTRACT)
    extrude(amount=-SALIENTE_EXTRUIR2_DEPTH)

    # Croquis8 → Cortar-Extruir9 (cut)
    with BuildSketch(Plane(origin=(0, 0, 85), x_dir=(-1, 0, 0), z_dir=(0, 0, -1))):
        Circle(CROQUIS8_R)
    extrude(amount=-CORTAR_EXTRUIR9_DEPTH, mode=Mode.SUBTRACT)

    # Cavidad2 outline → Cavidad2 (cut)
    with BuildSketch(Plane.XY.offset(CAVIDAD2_START)):
        Circle(CAVIDAD2_OUTLINE_R)
    extrude(amount=CAVIDAD2_DEPTH, mode=Mode.SUBTRACT)


with BuildPart() as body_2:
    # Simetría1: mirrored copy
    add(part.part.mirror(Plane.XY.offset(85)))


solid = body_2.part
